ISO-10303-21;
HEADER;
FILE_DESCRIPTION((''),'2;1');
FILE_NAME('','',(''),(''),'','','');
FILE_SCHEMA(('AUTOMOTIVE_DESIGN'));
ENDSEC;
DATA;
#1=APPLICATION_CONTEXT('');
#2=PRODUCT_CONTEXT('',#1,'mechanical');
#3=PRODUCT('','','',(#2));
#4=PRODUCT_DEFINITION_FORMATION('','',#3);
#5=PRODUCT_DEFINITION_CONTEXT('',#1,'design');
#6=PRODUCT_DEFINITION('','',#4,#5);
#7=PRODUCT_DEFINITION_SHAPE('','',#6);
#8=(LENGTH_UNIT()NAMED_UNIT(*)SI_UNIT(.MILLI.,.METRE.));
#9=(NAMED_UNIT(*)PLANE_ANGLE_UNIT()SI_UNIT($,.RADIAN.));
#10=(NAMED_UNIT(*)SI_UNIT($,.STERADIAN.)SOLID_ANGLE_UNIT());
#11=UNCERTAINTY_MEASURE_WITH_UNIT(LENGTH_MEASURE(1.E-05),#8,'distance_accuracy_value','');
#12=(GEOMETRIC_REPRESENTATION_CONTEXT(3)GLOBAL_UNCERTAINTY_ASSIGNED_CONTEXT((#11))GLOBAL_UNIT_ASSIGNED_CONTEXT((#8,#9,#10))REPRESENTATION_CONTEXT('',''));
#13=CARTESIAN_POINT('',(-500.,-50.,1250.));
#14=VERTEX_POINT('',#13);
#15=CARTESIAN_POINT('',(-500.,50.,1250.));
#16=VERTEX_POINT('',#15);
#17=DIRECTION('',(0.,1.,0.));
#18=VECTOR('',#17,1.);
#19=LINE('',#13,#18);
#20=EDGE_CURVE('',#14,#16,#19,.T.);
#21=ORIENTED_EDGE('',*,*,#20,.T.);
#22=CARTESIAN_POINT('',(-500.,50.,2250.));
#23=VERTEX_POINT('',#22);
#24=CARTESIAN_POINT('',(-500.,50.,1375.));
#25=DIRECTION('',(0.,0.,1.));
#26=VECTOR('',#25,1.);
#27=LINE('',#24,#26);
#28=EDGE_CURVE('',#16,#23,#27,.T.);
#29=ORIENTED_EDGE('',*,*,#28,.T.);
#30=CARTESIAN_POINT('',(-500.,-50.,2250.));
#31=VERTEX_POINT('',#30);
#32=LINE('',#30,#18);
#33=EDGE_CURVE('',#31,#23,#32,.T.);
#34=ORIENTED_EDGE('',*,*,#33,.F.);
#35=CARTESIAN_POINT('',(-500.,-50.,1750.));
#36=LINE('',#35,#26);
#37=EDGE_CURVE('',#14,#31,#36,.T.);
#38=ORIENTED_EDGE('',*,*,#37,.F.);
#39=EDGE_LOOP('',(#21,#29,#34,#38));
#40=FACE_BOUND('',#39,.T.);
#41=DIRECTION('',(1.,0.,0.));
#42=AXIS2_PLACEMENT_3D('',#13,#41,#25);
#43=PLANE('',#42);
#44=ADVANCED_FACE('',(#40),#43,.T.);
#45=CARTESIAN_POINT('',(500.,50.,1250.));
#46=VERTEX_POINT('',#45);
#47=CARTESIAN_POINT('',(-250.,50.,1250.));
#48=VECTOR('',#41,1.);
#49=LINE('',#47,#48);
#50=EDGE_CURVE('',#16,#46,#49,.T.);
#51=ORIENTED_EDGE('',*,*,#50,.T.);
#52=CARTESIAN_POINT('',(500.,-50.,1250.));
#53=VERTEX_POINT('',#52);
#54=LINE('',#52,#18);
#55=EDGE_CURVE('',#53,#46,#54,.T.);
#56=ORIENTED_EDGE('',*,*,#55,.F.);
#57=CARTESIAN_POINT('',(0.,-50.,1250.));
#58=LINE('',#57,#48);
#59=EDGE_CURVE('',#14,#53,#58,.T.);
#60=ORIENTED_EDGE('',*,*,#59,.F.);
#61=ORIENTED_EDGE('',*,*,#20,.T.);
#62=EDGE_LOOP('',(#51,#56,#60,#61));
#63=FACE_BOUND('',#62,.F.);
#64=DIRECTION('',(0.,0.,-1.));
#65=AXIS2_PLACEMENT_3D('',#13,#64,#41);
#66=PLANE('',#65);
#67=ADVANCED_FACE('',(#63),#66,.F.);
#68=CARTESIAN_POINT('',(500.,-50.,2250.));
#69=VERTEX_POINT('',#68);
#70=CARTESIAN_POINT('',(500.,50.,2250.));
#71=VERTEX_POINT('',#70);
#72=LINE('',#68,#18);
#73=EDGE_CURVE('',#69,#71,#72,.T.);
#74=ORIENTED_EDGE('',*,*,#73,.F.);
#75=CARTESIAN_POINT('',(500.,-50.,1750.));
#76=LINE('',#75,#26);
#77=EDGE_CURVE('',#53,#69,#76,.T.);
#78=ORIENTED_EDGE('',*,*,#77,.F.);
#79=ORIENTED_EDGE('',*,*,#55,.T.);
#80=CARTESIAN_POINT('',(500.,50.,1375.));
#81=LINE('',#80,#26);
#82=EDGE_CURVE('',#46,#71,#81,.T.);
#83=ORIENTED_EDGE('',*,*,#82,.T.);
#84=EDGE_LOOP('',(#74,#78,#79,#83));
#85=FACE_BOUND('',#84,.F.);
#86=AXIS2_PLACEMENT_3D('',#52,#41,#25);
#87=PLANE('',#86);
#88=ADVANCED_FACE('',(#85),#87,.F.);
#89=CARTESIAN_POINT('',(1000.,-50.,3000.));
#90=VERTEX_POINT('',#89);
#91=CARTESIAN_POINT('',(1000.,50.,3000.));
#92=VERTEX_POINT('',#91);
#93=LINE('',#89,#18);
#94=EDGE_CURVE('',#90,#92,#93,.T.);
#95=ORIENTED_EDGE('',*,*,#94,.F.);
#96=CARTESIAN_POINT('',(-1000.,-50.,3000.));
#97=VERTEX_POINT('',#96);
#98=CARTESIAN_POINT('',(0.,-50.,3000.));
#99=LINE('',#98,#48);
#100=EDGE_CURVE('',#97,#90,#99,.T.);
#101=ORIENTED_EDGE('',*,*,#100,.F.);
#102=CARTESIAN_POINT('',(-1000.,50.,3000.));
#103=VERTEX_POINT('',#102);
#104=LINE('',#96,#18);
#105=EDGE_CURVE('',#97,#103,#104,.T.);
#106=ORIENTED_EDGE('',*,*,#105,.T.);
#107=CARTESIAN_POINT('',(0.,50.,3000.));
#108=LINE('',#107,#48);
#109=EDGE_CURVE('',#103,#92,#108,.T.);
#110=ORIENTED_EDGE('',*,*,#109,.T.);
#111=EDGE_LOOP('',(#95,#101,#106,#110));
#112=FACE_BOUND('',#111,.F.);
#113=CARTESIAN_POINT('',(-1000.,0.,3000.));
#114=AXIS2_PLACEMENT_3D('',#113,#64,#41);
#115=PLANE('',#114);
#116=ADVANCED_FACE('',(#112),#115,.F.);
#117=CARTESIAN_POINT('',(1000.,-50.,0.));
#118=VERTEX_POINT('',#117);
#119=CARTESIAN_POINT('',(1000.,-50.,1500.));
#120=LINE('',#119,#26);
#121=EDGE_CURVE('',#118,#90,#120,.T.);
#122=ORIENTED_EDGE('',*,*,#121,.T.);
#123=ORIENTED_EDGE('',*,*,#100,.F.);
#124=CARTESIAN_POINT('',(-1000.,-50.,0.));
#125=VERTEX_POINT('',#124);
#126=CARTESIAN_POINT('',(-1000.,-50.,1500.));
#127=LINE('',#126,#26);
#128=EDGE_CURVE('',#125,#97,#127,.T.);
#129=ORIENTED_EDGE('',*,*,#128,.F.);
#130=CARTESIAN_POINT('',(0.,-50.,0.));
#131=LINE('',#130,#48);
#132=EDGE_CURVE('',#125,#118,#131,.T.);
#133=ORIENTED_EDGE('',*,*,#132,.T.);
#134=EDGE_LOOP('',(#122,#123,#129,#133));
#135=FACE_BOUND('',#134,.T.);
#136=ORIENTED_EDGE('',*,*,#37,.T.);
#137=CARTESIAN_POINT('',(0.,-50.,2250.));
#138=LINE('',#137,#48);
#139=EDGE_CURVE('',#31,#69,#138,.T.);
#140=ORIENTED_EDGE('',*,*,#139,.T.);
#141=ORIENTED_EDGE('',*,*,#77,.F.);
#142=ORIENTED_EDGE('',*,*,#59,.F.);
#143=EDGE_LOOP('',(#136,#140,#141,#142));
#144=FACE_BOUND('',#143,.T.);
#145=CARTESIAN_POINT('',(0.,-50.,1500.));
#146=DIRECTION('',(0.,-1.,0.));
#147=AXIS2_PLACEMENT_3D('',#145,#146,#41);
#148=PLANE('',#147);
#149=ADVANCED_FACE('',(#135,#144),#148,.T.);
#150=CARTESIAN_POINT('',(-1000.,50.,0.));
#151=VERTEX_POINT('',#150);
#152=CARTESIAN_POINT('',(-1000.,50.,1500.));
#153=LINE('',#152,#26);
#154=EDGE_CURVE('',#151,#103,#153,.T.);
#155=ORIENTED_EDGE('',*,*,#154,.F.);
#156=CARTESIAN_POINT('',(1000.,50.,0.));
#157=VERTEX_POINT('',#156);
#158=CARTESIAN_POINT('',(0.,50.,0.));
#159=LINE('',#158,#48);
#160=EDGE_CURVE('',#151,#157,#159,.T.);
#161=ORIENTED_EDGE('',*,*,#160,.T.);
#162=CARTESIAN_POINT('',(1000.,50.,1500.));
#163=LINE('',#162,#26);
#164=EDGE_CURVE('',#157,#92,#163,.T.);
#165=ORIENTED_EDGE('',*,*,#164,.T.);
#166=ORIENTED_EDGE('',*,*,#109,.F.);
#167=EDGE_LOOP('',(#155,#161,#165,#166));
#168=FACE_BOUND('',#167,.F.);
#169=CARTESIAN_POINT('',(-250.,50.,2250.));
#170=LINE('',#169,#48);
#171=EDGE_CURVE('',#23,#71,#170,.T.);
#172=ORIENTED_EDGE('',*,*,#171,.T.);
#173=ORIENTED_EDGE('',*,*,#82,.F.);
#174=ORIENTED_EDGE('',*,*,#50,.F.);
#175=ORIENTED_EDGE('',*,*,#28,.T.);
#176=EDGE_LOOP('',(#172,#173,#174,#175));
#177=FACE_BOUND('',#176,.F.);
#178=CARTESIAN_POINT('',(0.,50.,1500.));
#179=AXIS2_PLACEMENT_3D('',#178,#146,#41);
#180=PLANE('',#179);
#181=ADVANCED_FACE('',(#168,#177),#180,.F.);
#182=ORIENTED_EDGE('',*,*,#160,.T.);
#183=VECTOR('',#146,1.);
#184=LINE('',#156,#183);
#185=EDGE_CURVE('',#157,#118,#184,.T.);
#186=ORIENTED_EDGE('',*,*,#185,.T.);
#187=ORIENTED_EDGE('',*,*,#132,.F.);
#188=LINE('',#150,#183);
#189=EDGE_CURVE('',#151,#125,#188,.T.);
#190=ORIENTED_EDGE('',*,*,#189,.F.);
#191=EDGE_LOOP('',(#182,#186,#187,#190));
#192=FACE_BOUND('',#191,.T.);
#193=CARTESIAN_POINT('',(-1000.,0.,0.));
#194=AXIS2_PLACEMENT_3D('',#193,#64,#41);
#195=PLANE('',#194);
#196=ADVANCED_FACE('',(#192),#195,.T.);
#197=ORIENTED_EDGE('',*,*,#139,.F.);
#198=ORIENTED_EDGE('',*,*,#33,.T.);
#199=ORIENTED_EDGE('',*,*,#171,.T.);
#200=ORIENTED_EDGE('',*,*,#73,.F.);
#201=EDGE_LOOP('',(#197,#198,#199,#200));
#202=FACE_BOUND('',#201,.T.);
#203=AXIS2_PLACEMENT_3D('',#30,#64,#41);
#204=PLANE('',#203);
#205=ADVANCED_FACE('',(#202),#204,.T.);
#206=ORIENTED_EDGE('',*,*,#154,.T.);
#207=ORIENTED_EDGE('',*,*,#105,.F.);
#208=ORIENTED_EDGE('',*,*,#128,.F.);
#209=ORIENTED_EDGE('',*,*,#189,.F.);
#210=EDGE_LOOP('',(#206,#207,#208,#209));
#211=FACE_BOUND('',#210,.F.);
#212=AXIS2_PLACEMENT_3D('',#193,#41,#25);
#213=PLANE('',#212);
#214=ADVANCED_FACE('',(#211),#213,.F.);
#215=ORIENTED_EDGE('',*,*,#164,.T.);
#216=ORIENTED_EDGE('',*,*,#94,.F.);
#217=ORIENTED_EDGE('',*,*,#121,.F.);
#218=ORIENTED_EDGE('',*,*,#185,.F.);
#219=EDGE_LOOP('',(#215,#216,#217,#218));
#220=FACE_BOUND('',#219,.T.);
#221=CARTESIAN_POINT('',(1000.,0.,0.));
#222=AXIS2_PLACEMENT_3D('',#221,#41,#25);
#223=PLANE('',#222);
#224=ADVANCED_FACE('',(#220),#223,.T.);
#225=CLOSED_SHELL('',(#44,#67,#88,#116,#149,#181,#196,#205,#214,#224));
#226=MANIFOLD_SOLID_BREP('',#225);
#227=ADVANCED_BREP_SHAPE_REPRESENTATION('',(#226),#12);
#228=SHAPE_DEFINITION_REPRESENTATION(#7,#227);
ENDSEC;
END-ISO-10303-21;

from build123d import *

# Parameters (mm, degrees)
F0_W     = 2000
F0_H     = 3000
F1_DEPTH = 50
F2_W     = 1000
F2_H     = 1000
F3_DEPTH = 100.001


# Not quite as in the source:
# - a feature names something its author has since deleted; it is built from what else it names


with BuildPart() as f1:
    # F0 (on Front) → F1 (new body, symmetric)
    with BuildSketch(Plane.XZ):
        with Locations((0, 1500)):
            Rectangle(F0_W, F0_H)
    extrude(amount=F1_DEPTH, both=True)

    # F2 (on face) → F3 (cut, through all)
    with BuildSketch(Plane.XZ.offset(50)):
        with Locations((0, 1750)):
            Rectangle(F2_W, F2_H)
    extrude(amount=-F3_DEPTH, mode=Mode.SUBTRACT)


solid = f1.part
